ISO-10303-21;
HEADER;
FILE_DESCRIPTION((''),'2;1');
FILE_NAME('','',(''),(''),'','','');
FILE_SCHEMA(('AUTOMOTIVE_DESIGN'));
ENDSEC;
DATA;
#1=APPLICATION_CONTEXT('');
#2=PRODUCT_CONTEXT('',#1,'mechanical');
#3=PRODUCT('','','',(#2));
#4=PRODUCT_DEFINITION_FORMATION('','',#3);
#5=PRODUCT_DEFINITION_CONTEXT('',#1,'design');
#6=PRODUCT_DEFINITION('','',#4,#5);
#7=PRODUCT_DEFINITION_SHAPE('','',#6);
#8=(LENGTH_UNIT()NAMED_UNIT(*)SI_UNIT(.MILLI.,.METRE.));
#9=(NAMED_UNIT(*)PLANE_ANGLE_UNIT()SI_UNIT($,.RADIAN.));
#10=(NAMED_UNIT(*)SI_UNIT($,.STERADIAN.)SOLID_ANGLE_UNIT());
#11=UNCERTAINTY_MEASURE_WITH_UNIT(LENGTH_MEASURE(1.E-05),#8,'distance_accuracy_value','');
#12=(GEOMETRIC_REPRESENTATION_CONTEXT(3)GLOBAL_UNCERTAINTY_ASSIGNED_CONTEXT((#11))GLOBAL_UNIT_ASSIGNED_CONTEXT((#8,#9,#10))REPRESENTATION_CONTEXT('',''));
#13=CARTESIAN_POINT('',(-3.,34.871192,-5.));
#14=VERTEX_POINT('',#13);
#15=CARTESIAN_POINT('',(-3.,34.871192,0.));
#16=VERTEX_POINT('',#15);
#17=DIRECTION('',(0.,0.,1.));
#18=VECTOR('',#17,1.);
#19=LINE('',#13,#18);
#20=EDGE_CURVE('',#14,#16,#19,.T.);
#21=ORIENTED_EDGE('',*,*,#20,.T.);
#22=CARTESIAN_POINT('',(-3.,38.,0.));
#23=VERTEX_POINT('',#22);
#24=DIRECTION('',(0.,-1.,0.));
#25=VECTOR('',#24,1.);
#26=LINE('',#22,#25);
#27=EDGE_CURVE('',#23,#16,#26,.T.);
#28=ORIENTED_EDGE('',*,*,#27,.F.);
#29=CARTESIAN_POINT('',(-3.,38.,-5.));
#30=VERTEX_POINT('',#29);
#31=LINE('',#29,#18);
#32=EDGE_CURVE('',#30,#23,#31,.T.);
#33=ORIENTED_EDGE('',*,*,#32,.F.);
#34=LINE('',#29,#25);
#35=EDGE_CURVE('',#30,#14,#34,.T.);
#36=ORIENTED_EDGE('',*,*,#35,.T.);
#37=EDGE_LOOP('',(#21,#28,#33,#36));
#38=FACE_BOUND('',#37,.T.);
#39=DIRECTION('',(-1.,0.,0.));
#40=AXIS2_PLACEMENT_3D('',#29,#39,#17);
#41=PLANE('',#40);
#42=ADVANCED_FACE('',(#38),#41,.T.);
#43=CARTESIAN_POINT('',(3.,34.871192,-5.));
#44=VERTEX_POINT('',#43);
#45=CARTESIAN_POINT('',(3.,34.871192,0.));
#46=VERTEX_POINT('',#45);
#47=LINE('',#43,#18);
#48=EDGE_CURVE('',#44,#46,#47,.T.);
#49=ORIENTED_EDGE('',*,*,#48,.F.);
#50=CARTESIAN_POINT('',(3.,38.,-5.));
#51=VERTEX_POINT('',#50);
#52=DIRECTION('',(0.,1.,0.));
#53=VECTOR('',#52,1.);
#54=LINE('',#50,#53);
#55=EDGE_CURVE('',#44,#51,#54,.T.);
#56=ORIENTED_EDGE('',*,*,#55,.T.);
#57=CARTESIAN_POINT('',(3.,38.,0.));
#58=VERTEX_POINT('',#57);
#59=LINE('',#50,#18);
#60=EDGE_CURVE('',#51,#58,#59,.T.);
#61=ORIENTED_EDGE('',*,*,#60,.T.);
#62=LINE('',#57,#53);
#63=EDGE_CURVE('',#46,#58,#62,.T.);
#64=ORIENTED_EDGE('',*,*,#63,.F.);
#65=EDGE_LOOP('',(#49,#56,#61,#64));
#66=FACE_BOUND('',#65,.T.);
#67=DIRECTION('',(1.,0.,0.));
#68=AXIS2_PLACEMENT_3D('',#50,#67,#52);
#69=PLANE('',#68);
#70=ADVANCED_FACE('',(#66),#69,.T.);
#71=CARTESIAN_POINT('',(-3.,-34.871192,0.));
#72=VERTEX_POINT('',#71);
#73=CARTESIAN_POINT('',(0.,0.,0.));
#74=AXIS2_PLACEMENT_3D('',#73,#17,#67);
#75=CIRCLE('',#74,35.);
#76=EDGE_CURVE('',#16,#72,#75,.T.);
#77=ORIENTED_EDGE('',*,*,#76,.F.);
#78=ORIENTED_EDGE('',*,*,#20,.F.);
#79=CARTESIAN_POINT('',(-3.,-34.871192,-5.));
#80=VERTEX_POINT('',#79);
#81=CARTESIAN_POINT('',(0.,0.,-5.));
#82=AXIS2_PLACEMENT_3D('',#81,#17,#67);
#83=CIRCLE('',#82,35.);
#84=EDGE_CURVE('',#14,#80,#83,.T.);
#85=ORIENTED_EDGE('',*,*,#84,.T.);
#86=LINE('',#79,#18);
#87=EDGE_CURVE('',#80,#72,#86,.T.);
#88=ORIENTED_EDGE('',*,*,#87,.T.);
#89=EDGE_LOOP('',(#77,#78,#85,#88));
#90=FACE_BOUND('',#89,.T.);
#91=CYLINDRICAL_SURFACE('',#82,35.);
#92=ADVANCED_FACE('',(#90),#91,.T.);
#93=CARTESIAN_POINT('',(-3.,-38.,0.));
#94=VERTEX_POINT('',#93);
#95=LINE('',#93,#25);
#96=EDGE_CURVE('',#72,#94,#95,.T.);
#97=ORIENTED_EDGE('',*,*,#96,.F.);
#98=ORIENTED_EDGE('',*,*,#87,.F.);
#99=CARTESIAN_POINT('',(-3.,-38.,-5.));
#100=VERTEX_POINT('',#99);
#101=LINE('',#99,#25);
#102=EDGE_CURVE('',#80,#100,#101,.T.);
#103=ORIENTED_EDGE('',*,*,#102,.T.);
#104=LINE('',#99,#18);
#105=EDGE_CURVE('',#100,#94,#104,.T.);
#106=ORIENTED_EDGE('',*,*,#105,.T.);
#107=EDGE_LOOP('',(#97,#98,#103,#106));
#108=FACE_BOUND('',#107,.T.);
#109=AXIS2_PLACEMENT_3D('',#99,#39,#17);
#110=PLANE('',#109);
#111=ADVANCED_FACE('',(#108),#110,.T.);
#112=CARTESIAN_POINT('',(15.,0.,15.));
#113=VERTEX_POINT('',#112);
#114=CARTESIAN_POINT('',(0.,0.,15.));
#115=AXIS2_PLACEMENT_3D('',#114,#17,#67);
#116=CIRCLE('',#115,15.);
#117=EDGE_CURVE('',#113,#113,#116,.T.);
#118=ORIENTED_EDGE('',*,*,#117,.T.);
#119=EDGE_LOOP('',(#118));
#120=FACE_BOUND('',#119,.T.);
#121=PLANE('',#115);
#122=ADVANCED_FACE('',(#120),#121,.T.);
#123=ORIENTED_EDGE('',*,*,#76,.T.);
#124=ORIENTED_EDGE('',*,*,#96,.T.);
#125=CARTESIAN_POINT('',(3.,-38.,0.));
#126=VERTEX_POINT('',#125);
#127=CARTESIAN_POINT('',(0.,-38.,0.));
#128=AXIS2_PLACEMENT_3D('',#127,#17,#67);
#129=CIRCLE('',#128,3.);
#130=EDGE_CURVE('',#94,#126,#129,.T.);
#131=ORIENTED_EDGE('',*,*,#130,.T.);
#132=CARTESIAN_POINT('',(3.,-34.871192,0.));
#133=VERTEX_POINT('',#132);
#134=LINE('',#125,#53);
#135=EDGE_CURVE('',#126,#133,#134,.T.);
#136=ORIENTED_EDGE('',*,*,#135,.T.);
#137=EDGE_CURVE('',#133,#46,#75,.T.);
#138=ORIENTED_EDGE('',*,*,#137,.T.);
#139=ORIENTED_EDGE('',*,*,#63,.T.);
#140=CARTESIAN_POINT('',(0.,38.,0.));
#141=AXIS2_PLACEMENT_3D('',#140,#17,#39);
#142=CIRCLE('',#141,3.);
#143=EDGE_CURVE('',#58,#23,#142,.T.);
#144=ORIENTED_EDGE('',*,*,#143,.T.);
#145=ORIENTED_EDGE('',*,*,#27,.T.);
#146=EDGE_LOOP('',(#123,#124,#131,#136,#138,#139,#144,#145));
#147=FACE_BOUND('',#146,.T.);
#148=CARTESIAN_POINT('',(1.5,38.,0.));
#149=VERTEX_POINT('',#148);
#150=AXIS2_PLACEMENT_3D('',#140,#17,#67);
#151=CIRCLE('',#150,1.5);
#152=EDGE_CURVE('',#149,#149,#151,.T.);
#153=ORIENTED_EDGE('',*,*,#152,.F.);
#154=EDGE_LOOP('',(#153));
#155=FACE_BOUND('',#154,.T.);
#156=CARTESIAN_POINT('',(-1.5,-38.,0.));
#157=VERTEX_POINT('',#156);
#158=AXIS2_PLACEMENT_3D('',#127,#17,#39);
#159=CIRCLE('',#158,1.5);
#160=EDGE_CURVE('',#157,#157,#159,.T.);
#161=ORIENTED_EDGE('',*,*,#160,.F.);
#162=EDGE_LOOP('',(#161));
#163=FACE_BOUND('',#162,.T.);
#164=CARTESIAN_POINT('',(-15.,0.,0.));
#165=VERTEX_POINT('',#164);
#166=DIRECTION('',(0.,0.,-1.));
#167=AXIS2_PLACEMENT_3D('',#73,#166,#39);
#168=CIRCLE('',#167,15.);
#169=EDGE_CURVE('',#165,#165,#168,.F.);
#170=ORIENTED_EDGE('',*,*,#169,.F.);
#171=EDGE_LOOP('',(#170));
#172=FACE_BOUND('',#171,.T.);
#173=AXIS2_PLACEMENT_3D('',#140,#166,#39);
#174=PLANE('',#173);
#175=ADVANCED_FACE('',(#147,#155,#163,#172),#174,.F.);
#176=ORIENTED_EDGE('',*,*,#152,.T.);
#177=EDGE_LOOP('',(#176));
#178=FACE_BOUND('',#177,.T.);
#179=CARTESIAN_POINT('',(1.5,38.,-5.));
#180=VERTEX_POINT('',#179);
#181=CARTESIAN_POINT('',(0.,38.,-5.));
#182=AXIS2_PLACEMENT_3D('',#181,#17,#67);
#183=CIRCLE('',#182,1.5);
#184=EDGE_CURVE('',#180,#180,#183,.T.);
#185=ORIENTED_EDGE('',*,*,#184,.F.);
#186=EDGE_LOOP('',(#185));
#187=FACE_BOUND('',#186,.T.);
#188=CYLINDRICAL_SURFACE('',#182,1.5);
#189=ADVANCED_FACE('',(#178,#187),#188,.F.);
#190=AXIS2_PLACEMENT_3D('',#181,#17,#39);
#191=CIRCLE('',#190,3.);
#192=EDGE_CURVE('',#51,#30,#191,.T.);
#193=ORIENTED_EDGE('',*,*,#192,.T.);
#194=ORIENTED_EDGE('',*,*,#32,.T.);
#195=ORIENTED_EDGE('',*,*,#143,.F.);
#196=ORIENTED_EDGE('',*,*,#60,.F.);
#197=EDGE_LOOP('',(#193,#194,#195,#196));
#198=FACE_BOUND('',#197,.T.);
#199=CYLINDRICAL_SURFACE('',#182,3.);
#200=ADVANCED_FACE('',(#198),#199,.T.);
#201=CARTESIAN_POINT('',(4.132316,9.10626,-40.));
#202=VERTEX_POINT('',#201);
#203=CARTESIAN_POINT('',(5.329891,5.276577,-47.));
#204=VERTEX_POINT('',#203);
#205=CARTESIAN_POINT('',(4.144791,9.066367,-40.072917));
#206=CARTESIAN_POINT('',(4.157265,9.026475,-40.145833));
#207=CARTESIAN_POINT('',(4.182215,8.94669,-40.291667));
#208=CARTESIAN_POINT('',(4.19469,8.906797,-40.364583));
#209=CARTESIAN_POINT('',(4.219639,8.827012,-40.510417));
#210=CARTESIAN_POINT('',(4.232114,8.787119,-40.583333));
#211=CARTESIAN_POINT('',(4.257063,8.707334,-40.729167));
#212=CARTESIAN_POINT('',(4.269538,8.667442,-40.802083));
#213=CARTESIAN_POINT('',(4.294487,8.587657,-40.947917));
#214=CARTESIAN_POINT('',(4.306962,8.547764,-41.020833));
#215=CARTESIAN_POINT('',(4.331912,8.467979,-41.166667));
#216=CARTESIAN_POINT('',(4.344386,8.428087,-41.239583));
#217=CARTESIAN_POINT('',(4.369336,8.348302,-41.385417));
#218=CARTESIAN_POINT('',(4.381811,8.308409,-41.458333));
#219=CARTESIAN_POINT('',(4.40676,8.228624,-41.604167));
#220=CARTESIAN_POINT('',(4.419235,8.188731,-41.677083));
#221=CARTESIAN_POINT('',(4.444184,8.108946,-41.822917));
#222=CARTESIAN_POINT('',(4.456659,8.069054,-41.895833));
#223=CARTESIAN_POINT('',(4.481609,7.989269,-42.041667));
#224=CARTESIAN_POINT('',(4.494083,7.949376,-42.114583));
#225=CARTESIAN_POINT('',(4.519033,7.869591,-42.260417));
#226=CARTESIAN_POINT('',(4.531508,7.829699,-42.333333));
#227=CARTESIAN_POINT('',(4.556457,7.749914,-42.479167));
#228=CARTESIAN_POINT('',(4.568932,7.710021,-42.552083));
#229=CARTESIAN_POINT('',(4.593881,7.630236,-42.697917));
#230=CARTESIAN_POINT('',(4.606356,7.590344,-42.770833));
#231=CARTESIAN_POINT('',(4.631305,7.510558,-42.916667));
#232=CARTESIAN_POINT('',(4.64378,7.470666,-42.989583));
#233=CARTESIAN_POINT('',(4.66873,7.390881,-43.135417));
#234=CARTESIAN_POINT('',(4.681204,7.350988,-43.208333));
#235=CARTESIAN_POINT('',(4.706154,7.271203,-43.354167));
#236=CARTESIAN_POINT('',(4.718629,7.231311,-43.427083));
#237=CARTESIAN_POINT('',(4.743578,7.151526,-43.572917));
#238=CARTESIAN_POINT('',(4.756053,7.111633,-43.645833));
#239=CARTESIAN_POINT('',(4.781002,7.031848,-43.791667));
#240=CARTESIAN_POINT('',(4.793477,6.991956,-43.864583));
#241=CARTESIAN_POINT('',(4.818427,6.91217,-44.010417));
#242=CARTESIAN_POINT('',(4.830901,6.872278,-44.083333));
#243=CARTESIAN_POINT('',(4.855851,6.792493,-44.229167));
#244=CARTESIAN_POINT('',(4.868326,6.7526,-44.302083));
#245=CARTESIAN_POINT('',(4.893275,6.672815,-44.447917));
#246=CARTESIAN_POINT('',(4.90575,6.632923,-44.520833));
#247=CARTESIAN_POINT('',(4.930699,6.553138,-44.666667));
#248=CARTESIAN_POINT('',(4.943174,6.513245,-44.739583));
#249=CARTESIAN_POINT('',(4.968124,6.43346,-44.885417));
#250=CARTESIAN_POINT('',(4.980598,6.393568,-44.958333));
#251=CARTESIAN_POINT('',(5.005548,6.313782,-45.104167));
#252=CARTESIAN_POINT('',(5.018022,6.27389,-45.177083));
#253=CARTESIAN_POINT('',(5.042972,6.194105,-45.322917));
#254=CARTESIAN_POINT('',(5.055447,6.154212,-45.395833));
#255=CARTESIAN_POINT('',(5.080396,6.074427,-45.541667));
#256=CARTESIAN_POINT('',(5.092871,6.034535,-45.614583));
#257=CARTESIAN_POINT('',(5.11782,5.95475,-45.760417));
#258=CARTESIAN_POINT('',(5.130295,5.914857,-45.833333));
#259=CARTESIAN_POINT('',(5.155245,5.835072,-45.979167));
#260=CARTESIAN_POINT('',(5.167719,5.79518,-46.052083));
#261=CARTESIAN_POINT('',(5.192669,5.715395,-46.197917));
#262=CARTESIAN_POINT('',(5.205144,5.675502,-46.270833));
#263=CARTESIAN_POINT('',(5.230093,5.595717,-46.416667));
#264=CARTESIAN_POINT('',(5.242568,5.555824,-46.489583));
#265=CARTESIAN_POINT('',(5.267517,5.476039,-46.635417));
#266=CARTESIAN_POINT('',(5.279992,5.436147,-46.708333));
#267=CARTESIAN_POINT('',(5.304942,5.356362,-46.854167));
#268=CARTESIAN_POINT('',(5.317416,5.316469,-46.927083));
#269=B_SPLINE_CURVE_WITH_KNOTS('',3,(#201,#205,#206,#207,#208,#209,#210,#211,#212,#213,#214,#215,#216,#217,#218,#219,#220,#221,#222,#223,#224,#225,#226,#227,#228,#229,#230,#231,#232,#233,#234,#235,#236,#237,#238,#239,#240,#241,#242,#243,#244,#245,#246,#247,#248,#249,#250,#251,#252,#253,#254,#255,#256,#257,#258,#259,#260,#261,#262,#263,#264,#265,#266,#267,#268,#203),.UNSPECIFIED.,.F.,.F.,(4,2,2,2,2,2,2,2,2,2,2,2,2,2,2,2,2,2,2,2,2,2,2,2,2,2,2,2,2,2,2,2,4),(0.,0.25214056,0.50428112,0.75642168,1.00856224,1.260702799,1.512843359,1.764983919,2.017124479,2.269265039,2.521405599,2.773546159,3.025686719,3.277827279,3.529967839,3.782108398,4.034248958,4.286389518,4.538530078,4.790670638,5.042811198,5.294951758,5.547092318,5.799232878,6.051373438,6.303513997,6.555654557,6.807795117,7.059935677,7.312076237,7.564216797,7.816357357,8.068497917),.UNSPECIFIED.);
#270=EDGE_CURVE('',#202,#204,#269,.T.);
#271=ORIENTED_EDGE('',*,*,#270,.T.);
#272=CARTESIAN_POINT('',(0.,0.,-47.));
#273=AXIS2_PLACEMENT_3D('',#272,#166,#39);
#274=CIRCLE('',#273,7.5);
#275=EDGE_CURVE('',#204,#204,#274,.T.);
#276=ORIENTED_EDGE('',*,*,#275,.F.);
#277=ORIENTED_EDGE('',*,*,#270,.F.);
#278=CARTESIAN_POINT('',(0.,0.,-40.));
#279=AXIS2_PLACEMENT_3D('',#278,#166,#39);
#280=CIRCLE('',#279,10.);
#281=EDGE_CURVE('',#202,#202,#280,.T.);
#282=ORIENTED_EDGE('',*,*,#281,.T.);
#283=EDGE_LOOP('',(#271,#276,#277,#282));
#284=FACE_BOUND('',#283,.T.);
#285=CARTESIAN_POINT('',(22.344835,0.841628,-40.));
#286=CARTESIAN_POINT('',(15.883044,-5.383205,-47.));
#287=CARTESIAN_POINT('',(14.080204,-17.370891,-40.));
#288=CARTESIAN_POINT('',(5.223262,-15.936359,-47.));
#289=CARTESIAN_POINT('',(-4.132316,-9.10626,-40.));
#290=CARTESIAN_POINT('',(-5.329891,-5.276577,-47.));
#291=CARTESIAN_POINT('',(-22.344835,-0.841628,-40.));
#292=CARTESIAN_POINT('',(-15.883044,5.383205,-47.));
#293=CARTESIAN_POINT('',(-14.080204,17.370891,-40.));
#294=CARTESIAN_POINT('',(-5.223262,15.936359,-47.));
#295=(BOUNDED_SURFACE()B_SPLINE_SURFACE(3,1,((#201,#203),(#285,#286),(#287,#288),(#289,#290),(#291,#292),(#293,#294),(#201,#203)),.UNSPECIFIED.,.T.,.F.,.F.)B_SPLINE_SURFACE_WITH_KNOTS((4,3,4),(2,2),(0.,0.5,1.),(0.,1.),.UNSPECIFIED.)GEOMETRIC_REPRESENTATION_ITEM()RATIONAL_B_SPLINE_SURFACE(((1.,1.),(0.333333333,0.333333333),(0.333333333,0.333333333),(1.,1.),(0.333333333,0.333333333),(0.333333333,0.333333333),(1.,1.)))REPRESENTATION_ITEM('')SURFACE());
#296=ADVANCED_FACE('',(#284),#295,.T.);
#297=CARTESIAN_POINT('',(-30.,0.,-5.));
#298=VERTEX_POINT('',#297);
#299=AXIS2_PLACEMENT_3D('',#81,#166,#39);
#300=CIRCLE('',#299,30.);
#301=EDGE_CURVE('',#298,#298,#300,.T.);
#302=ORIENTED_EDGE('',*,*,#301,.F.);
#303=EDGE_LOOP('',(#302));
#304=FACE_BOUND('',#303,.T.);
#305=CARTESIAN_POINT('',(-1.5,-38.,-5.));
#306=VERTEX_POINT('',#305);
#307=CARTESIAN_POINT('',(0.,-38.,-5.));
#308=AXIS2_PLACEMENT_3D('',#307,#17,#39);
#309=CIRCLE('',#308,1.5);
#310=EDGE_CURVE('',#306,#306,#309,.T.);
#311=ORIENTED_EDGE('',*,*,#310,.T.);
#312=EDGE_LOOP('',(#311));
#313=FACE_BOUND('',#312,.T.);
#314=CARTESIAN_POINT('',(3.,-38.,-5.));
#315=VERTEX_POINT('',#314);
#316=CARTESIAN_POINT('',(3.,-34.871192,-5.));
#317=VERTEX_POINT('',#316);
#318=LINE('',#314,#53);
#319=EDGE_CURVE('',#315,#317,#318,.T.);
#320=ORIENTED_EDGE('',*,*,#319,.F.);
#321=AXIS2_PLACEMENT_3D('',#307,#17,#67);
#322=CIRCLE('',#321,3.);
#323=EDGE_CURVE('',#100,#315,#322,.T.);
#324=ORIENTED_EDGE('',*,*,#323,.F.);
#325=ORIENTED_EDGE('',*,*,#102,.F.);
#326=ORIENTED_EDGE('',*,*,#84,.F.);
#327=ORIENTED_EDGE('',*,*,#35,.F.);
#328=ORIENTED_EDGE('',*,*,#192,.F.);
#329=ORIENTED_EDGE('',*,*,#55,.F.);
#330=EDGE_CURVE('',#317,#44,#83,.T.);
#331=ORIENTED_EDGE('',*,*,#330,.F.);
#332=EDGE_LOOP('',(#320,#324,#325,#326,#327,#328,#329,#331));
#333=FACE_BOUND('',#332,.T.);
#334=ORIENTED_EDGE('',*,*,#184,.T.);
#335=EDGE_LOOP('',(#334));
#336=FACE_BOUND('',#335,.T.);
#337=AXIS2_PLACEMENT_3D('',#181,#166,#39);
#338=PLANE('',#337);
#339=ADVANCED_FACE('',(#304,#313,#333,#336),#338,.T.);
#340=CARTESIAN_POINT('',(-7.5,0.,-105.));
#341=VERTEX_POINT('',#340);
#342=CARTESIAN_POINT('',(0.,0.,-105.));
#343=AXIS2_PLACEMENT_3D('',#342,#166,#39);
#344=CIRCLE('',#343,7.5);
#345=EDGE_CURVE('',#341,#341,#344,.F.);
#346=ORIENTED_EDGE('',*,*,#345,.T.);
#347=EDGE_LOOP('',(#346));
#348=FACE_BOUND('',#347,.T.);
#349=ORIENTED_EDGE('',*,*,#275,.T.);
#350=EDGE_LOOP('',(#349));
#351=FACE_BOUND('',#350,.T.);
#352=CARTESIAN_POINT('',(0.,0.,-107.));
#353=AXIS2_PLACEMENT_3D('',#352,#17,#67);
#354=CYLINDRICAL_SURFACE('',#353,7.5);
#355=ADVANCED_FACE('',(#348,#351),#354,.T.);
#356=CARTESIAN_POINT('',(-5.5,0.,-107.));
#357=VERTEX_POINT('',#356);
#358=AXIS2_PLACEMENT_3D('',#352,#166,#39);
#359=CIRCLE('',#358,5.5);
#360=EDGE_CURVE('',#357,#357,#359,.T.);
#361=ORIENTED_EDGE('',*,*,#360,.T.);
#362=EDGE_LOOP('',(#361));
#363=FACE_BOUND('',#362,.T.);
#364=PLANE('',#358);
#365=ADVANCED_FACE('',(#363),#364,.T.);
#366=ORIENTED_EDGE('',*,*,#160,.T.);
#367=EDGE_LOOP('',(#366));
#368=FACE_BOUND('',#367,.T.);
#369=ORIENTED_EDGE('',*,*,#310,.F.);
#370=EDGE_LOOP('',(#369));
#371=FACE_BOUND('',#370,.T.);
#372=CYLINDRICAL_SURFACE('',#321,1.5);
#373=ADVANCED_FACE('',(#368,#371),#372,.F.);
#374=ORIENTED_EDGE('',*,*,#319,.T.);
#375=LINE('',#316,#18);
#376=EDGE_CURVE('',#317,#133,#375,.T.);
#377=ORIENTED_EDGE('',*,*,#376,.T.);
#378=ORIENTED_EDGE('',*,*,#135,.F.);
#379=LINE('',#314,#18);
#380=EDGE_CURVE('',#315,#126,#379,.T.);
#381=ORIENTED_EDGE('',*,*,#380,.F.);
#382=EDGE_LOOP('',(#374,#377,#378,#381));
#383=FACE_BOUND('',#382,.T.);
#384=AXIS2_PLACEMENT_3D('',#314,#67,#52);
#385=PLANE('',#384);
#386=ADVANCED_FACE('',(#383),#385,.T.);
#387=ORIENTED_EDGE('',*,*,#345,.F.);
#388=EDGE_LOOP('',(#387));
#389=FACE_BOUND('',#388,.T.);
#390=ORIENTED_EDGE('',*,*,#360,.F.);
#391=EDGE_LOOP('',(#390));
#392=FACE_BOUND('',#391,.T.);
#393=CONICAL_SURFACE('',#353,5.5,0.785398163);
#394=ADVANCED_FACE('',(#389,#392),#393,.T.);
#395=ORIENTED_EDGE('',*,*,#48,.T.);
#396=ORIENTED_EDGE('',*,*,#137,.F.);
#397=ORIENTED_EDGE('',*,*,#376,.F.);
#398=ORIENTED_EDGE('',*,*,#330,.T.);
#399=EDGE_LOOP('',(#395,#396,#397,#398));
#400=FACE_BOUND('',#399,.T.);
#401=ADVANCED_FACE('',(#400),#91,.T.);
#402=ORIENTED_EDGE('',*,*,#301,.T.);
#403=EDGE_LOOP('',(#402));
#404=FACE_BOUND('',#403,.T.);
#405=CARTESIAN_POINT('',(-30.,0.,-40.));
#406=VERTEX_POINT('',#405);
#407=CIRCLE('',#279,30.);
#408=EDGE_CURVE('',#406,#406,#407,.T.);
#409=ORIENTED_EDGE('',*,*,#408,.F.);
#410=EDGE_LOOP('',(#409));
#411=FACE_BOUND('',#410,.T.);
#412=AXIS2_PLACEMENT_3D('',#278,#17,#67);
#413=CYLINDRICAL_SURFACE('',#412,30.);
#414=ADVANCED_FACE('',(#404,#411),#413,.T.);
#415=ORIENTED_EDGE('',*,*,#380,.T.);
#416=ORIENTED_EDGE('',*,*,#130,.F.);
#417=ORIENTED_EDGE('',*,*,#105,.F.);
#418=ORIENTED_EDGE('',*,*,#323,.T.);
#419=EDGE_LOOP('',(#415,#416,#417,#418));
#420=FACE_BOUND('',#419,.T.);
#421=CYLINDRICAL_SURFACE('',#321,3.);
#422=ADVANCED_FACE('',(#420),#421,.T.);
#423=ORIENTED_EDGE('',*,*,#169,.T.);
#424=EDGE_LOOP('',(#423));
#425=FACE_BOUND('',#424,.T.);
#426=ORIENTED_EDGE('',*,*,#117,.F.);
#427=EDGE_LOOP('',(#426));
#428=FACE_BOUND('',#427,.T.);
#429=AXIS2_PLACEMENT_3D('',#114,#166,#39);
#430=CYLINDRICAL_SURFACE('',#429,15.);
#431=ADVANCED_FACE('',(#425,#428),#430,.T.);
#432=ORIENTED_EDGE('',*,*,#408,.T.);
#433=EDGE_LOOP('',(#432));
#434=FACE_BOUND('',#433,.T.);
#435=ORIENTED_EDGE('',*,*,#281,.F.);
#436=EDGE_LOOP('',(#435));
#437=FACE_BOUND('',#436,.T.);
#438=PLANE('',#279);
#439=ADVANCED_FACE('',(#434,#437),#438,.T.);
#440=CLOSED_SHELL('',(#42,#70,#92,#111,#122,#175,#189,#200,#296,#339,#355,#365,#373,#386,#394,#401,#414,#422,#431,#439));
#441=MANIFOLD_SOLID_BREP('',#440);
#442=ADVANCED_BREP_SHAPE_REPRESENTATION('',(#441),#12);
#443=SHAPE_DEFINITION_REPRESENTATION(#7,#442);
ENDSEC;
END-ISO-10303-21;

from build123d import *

# Parameters (mm, degrees)
SKETCH1_R           = 1.5
BOSS_EXTRUDE1_DEPTH = 5
SKETCH2_R           = 15
BOSS_EXTRUDE2_DEPTH = 15
SKETCH3_R           = 30
BOSS_EXTRUDE3_DEPTH = 35
SKETCH6_R           = 7.5
BOSS_EXTRUDE5_DEPTH = 60
CHAMFER2_SIZE       = 2


with BuildPart() as part:
    # Sketch1 → Boss-Extrude1 (new body)
    with BuildSketch(Plane.XY):
        with BuildLine():
            Line((-3, 38), (-3, 34.871191548))
            ThreePointArc((-3, 34.871191548), (-35, 0), (-3, -34.871191548))
            Line((-3, -34.871191548), (-3, -38))
            ThreePointArc((-3, -38), (0, -41), (3, -38))
            Line((3, -38), (3, -34.871191548))
            ThreePointArc((3, -34.871191548), (35, 0), (3, 34.871191548))
            Line((3, 34.871191548), (3, 38))
            ThreePointArc((3, 38), (0, 41), (-3, 38))
        make_face()
        with Locations((0, 38)):
            Circle(SKETCH1_R, mode=Mode.SUBTRACT)
        with Locations(Location((0, -38, 0), (0, 0, 180))):
            Circle(SKETCH1_R, mode=Mode.SUBTRACT)
    extrude(amount=-BOSS_EXTRUDE1_DEPTH)

    # Sketch2 → Boss-Extrude2 (add)
    with BuildSketch(Plane.XY):
        with Locations(Location((0, 0, 0), (0, 0, 180))):
            Circle(SKETCH2_R)
    extrude(amount=BOSS_EXTRUDE2_DEPTH)

    # Sketch3 → Boss-Extrude3 (add)
    with BuildSketch(Plane(origin=(0, 0, -5), x_dir=(-1, 0, 0), z_dir=(0, 0, -1))):
        Circle(SKETCH3_R)
    extrude(amount=BOSS_EXTRUDE3_DEPTH)

    # Loft1: read off the stored shape, not the designer's step
    # Loft1: loft between two sections, ruled curve by curve
    loft1_from = [
        Edge.make_bspline([(4.132315812, 9.106259717, -40), (22.344835246, 0.841628092, -40), (14.080203621, -17.370891341, -40), (-4.132315812, -9.106259717, -40), (-22.344835246, -0.841628092, -40), (-14.080203621, 17.370891341, -40), (4.132315812, 9.106259717, -40)], [0, 0, 0, 0, 0.5, 0.5, 0.5, 1, 1, 1, 1], 3, [1, 0.333333333, 0.333333333, 1, 0.333333333, 0.333333333, 1]),
    ]
    loft1_to = [
        Edge.make_bspline([(5.329891047, 5.276576677, -47), (15.8830444, -5.383205418, -47), (5.223262306, -15.936358771, -47), (-5.329891047, -5.276576677, -47), (-15.8830444, 5.383205418, -47), (-5.223262306, 15.936358771, -47), (5.329891047, 5.276576677, -47)], [0, 0, 0, 0, 0.5, 0.5, 0.5, 1, 1, 1, 1], 3, [1, 0.333333333, 0.333333333, 1, 0.333333333, 0.333333333, 1]),
    ]
    loft1 = Solid(Shell([*[Face.make_surface_from_curves(loft1_from[k], loft1_to[k]) for k in range(1)], Face(Wire(loft1_from)), Face(Wire(loft1_to))]))
    add(loft1)

    # Sketch6 → Boss-Extrude5 (add)
    with BuildSketch(Plane(origin=(0, 0, -47), x_dir=(-1, 0, 0), z_dir=(0, 0, -1))):
        with Locations(Location((0, 0, 0), (0, 0, 135.288))):
            Circle(SKETCH6_R)
    extrude(amount=BOSS_EXTRUDE5_DEPTH)

    # Chamfer2
    chamfer2_edges = [part.edges().sort_by_distance(p)[0] for p in [
        (-5.329891047, -5.276576677, -107),
    ]]
    chamfer(chamfer2_edges, length=CHAMFER2_SIZE)


solid = part.part
